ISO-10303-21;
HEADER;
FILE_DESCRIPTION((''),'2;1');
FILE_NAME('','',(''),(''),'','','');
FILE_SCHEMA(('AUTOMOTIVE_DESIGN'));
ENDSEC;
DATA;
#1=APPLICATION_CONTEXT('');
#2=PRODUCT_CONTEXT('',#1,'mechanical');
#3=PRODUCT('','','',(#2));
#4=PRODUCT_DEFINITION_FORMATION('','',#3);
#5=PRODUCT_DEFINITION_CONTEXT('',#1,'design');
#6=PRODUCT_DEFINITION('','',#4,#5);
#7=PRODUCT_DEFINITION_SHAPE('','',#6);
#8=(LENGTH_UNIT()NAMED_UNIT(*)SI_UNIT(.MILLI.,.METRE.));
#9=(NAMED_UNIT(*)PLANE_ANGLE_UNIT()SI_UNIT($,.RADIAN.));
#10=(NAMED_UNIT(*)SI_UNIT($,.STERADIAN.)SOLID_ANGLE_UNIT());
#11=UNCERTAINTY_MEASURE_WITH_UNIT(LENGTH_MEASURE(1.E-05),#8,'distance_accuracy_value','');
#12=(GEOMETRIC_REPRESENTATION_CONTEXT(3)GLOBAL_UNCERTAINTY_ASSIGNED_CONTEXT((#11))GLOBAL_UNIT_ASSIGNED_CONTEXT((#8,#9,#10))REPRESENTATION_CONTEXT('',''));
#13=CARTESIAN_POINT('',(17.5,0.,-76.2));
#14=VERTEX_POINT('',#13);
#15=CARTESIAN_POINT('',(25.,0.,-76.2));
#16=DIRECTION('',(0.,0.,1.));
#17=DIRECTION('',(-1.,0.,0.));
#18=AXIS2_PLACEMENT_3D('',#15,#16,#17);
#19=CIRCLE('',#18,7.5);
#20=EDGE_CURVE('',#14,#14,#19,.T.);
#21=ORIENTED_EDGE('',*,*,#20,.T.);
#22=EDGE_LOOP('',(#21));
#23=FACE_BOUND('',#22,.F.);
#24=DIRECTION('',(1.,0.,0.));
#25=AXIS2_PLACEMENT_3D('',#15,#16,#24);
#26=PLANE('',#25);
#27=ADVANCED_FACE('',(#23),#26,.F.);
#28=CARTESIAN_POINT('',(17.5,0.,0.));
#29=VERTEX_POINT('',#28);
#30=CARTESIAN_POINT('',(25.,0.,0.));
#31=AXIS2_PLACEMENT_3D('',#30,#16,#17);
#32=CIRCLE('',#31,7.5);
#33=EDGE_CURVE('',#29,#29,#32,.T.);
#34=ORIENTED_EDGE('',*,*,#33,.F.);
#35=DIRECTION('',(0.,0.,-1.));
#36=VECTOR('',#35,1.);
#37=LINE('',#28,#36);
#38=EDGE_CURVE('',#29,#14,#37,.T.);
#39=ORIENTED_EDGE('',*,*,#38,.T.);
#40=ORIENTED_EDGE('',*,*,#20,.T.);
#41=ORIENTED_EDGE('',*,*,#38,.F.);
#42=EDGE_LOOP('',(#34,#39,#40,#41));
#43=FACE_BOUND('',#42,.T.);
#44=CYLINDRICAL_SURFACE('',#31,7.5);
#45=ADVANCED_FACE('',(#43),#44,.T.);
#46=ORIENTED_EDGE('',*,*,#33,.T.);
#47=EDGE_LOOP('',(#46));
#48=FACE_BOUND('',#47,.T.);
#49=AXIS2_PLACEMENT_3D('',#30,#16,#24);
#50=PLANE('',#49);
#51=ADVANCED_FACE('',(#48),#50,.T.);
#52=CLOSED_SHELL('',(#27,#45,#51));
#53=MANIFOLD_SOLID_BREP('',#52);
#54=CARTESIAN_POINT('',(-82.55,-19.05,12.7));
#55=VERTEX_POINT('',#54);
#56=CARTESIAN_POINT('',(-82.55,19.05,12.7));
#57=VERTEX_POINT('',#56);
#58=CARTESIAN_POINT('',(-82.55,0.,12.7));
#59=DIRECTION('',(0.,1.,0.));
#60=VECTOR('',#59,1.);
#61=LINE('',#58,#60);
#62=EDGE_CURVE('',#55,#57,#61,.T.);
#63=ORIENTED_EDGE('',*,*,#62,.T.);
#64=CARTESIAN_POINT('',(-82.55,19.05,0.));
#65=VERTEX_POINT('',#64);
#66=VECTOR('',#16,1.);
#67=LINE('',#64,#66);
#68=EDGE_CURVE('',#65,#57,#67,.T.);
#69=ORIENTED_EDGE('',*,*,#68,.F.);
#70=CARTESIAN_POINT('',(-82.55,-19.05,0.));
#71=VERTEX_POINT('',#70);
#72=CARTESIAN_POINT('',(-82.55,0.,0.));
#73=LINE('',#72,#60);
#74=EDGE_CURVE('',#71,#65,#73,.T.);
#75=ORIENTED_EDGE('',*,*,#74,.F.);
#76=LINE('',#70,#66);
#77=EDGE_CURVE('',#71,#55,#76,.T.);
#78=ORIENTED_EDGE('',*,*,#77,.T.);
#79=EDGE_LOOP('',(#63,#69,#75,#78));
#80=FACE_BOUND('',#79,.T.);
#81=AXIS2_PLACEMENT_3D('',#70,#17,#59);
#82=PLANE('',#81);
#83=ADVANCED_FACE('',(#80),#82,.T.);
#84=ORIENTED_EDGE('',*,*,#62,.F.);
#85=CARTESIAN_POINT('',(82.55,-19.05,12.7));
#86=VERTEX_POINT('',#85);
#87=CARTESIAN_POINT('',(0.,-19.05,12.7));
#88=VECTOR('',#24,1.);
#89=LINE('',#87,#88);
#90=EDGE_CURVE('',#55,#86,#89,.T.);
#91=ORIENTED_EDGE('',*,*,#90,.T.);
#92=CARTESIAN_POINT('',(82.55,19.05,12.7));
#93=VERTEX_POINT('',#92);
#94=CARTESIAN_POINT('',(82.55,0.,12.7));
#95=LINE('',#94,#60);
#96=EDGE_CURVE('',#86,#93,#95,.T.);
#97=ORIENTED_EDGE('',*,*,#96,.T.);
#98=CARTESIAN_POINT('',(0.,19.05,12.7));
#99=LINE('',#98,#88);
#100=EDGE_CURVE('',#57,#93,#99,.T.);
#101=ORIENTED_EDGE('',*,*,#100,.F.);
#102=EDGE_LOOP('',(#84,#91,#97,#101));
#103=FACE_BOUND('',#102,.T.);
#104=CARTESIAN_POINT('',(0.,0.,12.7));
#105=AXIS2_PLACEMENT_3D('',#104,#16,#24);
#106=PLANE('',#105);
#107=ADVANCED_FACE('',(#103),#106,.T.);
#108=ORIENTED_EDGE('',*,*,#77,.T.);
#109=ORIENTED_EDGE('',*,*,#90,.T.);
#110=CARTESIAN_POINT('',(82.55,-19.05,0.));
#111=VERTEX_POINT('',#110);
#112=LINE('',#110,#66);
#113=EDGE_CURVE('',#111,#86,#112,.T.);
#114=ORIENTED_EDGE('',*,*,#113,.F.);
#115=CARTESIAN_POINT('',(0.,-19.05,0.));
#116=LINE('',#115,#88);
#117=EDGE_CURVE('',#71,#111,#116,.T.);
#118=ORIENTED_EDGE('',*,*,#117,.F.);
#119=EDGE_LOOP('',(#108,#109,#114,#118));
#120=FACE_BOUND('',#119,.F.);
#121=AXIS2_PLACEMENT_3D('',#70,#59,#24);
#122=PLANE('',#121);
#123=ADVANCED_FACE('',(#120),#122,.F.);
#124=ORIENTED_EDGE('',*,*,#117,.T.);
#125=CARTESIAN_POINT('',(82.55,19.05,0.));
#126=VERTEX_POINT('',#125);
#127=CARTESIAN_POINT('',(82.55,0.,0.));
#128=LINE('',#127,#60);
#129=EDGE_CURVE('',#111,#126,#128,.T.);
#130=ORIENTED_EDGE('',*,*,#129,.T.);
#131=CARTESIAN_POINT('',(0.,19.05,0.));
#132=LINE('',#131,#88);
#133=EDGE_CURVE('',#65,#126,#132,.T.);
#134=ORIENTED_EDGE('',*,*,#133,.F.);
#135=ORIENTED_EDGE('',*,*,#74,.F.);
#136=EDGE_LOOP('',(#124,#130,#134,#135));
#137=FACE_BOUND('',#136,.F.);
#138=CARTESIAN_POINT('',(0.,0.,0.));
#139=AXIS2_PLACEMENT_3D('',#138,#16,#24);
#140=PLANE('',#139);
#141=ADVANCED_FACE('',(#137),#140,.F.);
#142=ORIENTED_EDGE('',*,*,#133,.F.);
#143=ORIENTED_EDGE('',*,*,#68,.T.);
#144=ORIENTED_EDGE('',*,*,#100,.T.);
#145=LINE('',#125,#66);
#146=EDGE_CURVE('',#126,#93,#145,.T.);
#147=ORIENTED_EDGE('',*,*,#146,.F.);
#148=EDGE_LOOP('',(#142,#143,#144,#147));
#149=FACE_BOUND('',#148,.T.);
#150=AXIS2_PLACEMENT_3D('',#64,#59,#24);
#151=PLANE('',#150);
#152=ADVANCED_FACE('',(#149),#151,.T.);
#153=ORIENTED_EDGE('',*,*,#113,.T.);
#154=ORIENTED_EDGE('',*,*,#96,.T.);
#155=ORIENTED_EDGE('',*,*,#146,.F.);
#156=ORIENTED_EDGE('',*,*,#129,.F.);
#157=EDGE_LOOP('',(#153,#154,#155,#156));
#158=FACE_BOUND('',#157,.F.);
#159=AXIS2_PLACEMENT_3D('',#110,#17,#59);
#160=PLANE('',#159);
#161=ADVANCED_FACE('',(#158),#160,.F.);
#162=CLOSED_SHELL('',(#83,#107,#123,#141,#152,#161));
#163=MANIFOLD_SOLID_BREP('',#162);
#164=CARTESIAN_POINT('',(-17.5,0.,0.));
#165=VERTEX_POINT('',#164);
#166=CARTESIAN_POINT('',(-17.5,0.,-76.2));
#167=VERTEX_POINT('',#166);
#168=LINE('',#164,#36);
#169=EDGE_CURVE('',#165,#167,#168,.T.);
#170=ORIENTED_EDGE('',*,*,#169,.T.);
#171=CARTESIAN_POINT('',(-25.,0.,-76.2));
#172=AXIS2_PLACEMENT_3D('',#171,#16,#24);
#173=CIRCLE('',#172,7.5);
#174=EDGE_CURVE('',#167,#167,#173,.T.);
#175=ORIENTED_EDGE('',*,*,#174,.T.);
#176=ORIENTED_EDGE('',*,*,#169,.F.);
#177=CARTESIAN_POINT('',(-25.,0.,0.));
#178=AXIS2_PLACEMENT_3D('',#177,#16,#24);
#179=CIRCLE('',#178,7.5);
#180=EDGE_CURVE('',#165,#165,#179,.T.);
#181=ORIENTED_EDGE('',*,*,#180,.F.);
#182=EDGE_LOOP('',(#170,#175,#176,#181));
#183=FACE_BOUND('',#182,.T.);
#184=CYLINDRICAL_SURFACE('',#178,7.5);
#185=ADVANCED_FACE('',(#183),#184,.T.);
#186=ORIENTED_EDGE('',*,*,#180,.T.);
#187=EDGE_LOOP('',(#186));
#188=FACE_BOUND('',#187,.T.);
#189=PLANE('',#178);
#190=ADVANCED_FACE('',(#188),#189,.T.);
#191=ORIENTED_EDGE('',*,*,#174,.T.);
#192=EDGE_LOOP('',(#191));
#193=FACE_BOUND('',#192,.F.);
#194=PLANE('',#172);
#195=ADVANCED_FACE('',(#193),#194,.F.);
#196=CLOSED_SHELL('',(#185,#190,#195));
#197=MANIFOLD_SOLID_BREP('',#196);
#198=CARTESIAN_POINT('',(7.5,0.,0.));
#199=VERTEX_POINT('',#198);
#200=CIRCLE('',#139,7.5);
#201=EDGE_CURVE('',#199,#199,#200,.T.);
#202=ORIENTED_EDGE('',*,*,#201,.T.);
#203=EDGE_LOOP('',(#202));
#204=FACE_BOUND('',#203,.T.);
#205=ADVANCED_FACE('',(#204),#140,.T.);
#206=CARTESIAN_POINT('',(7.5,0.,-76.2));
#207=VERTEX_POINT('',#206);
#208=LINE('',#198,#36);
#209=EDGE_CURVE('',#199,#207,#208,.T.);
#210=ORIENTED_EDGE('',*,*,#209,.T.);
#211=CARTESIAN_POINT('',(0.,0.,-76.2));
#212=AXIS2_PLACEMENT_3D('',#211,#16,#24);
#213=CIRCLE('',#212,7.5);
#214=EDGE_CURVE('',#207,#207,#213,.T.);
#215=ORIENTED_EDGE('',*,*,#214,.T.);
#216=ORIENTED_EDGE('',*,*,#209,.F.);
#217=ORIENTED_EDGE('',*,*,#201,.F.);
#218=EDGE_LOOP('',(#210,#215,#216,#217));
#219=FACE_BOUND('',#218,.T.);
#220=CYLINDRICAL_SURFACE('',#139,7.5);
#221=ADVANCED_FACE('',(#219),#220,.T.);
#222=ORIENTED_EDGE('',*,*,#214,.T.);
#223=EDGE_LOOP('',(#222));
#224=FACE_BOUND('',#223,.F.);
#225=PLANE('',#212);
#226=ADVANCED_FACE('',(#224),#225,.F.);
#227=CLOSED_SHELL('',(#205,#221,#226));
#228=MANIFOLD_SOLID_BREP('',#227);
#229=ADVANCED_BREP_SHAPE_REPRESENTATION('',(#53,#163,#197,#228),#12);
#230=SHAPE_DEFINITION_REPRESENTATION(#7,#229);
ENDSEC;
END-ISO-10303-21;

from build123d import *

# Parameters (mm, degrees)
F0_W     = 165.1
F0_H     = 38.1
F0_R     = 7.5
F1_DEPTH = 12.7
F2_DEPTH = 76.2


with BuildPart() as f1:
    # F0 (on Top) → F1 (new body)
    with BuildSketch(Plane.XY):
        Rectangle(F0_W, F0_H)
        with Locations((-25, 0)):
            Circle(F0_R, mode=Mode.SUBTRACT)
        with BuildLine():
            ThreePointArc((-7.5, 0), (0, 7.5), (7.5, 0))
            ThreePointArc((7.5, 0), (0, -7.5), (-7.5, 0))
        make_face(mode=Mode.SUBTRACT)
        with BuildLine():
            ThreePointArc((32.5, 0), (25, -7.5), (17.5, 0))
            ThreePointArc((17.5, 0), (25, 7.5), (32.5, 0))
        make_face(mode=Mode.SUBTRACT)
        with BuildLine():
            ThreePointArc((-7.5, 0), (0, -7.5), (7.5, 0))
            ThreePointArc((7.5, 0), (0, 7.5), (-7.5, 0))
        make_face()
        with Locations((-25, 0)):
            Circle(F0_R)
        with BuildLine():
            ThreePointArc((32.5, 0), (25, 7.5), (17.5, 0))
            ThreePointArc((17.5, 0), (25, -7.5), (32.5, 0))
        make_face()
    extrude(amount=F1_DEPTH)


with BuildPart() as f2:
    # F0 (on Top) → F2 (new body)
    with BuildSketch(Plane.XY):
        with BuildLine():
            ThreePointArc((-7.5, 0), (0, -7.5), (7.5, 0))
            ThreePointArc((7.5, 0), (0, 7.5), (-7.5, 0))
        make_face()
    extrude(amount=-F2_DEPTH)


with BuildPart() as f2b:
    # F0 (on Top) → F2, piece 2 (new body)
    with BuildSketch(Plane.XY):
        with Locations((-25, 0)):
            Circle(F0_R)
    extrude(amount=-F2_DEPTH)


with BuildPart() as f2c:
    # F0 (on Top) → F2, piece 3 (new body)
    with BuildSketch(Plane.XY):
        with BuildLine():
            ThreePointArc((32.5, 0), (25, 7.5), (17.5, 0))
            ThreePointArc((17.5, 0), (25, -7.5), (32.5, 0))
        make_face()
    extrude(amount=-F2_DEPTH)


solid = Compound([f1.part, f2.part, f2b.part, f2c.part])
